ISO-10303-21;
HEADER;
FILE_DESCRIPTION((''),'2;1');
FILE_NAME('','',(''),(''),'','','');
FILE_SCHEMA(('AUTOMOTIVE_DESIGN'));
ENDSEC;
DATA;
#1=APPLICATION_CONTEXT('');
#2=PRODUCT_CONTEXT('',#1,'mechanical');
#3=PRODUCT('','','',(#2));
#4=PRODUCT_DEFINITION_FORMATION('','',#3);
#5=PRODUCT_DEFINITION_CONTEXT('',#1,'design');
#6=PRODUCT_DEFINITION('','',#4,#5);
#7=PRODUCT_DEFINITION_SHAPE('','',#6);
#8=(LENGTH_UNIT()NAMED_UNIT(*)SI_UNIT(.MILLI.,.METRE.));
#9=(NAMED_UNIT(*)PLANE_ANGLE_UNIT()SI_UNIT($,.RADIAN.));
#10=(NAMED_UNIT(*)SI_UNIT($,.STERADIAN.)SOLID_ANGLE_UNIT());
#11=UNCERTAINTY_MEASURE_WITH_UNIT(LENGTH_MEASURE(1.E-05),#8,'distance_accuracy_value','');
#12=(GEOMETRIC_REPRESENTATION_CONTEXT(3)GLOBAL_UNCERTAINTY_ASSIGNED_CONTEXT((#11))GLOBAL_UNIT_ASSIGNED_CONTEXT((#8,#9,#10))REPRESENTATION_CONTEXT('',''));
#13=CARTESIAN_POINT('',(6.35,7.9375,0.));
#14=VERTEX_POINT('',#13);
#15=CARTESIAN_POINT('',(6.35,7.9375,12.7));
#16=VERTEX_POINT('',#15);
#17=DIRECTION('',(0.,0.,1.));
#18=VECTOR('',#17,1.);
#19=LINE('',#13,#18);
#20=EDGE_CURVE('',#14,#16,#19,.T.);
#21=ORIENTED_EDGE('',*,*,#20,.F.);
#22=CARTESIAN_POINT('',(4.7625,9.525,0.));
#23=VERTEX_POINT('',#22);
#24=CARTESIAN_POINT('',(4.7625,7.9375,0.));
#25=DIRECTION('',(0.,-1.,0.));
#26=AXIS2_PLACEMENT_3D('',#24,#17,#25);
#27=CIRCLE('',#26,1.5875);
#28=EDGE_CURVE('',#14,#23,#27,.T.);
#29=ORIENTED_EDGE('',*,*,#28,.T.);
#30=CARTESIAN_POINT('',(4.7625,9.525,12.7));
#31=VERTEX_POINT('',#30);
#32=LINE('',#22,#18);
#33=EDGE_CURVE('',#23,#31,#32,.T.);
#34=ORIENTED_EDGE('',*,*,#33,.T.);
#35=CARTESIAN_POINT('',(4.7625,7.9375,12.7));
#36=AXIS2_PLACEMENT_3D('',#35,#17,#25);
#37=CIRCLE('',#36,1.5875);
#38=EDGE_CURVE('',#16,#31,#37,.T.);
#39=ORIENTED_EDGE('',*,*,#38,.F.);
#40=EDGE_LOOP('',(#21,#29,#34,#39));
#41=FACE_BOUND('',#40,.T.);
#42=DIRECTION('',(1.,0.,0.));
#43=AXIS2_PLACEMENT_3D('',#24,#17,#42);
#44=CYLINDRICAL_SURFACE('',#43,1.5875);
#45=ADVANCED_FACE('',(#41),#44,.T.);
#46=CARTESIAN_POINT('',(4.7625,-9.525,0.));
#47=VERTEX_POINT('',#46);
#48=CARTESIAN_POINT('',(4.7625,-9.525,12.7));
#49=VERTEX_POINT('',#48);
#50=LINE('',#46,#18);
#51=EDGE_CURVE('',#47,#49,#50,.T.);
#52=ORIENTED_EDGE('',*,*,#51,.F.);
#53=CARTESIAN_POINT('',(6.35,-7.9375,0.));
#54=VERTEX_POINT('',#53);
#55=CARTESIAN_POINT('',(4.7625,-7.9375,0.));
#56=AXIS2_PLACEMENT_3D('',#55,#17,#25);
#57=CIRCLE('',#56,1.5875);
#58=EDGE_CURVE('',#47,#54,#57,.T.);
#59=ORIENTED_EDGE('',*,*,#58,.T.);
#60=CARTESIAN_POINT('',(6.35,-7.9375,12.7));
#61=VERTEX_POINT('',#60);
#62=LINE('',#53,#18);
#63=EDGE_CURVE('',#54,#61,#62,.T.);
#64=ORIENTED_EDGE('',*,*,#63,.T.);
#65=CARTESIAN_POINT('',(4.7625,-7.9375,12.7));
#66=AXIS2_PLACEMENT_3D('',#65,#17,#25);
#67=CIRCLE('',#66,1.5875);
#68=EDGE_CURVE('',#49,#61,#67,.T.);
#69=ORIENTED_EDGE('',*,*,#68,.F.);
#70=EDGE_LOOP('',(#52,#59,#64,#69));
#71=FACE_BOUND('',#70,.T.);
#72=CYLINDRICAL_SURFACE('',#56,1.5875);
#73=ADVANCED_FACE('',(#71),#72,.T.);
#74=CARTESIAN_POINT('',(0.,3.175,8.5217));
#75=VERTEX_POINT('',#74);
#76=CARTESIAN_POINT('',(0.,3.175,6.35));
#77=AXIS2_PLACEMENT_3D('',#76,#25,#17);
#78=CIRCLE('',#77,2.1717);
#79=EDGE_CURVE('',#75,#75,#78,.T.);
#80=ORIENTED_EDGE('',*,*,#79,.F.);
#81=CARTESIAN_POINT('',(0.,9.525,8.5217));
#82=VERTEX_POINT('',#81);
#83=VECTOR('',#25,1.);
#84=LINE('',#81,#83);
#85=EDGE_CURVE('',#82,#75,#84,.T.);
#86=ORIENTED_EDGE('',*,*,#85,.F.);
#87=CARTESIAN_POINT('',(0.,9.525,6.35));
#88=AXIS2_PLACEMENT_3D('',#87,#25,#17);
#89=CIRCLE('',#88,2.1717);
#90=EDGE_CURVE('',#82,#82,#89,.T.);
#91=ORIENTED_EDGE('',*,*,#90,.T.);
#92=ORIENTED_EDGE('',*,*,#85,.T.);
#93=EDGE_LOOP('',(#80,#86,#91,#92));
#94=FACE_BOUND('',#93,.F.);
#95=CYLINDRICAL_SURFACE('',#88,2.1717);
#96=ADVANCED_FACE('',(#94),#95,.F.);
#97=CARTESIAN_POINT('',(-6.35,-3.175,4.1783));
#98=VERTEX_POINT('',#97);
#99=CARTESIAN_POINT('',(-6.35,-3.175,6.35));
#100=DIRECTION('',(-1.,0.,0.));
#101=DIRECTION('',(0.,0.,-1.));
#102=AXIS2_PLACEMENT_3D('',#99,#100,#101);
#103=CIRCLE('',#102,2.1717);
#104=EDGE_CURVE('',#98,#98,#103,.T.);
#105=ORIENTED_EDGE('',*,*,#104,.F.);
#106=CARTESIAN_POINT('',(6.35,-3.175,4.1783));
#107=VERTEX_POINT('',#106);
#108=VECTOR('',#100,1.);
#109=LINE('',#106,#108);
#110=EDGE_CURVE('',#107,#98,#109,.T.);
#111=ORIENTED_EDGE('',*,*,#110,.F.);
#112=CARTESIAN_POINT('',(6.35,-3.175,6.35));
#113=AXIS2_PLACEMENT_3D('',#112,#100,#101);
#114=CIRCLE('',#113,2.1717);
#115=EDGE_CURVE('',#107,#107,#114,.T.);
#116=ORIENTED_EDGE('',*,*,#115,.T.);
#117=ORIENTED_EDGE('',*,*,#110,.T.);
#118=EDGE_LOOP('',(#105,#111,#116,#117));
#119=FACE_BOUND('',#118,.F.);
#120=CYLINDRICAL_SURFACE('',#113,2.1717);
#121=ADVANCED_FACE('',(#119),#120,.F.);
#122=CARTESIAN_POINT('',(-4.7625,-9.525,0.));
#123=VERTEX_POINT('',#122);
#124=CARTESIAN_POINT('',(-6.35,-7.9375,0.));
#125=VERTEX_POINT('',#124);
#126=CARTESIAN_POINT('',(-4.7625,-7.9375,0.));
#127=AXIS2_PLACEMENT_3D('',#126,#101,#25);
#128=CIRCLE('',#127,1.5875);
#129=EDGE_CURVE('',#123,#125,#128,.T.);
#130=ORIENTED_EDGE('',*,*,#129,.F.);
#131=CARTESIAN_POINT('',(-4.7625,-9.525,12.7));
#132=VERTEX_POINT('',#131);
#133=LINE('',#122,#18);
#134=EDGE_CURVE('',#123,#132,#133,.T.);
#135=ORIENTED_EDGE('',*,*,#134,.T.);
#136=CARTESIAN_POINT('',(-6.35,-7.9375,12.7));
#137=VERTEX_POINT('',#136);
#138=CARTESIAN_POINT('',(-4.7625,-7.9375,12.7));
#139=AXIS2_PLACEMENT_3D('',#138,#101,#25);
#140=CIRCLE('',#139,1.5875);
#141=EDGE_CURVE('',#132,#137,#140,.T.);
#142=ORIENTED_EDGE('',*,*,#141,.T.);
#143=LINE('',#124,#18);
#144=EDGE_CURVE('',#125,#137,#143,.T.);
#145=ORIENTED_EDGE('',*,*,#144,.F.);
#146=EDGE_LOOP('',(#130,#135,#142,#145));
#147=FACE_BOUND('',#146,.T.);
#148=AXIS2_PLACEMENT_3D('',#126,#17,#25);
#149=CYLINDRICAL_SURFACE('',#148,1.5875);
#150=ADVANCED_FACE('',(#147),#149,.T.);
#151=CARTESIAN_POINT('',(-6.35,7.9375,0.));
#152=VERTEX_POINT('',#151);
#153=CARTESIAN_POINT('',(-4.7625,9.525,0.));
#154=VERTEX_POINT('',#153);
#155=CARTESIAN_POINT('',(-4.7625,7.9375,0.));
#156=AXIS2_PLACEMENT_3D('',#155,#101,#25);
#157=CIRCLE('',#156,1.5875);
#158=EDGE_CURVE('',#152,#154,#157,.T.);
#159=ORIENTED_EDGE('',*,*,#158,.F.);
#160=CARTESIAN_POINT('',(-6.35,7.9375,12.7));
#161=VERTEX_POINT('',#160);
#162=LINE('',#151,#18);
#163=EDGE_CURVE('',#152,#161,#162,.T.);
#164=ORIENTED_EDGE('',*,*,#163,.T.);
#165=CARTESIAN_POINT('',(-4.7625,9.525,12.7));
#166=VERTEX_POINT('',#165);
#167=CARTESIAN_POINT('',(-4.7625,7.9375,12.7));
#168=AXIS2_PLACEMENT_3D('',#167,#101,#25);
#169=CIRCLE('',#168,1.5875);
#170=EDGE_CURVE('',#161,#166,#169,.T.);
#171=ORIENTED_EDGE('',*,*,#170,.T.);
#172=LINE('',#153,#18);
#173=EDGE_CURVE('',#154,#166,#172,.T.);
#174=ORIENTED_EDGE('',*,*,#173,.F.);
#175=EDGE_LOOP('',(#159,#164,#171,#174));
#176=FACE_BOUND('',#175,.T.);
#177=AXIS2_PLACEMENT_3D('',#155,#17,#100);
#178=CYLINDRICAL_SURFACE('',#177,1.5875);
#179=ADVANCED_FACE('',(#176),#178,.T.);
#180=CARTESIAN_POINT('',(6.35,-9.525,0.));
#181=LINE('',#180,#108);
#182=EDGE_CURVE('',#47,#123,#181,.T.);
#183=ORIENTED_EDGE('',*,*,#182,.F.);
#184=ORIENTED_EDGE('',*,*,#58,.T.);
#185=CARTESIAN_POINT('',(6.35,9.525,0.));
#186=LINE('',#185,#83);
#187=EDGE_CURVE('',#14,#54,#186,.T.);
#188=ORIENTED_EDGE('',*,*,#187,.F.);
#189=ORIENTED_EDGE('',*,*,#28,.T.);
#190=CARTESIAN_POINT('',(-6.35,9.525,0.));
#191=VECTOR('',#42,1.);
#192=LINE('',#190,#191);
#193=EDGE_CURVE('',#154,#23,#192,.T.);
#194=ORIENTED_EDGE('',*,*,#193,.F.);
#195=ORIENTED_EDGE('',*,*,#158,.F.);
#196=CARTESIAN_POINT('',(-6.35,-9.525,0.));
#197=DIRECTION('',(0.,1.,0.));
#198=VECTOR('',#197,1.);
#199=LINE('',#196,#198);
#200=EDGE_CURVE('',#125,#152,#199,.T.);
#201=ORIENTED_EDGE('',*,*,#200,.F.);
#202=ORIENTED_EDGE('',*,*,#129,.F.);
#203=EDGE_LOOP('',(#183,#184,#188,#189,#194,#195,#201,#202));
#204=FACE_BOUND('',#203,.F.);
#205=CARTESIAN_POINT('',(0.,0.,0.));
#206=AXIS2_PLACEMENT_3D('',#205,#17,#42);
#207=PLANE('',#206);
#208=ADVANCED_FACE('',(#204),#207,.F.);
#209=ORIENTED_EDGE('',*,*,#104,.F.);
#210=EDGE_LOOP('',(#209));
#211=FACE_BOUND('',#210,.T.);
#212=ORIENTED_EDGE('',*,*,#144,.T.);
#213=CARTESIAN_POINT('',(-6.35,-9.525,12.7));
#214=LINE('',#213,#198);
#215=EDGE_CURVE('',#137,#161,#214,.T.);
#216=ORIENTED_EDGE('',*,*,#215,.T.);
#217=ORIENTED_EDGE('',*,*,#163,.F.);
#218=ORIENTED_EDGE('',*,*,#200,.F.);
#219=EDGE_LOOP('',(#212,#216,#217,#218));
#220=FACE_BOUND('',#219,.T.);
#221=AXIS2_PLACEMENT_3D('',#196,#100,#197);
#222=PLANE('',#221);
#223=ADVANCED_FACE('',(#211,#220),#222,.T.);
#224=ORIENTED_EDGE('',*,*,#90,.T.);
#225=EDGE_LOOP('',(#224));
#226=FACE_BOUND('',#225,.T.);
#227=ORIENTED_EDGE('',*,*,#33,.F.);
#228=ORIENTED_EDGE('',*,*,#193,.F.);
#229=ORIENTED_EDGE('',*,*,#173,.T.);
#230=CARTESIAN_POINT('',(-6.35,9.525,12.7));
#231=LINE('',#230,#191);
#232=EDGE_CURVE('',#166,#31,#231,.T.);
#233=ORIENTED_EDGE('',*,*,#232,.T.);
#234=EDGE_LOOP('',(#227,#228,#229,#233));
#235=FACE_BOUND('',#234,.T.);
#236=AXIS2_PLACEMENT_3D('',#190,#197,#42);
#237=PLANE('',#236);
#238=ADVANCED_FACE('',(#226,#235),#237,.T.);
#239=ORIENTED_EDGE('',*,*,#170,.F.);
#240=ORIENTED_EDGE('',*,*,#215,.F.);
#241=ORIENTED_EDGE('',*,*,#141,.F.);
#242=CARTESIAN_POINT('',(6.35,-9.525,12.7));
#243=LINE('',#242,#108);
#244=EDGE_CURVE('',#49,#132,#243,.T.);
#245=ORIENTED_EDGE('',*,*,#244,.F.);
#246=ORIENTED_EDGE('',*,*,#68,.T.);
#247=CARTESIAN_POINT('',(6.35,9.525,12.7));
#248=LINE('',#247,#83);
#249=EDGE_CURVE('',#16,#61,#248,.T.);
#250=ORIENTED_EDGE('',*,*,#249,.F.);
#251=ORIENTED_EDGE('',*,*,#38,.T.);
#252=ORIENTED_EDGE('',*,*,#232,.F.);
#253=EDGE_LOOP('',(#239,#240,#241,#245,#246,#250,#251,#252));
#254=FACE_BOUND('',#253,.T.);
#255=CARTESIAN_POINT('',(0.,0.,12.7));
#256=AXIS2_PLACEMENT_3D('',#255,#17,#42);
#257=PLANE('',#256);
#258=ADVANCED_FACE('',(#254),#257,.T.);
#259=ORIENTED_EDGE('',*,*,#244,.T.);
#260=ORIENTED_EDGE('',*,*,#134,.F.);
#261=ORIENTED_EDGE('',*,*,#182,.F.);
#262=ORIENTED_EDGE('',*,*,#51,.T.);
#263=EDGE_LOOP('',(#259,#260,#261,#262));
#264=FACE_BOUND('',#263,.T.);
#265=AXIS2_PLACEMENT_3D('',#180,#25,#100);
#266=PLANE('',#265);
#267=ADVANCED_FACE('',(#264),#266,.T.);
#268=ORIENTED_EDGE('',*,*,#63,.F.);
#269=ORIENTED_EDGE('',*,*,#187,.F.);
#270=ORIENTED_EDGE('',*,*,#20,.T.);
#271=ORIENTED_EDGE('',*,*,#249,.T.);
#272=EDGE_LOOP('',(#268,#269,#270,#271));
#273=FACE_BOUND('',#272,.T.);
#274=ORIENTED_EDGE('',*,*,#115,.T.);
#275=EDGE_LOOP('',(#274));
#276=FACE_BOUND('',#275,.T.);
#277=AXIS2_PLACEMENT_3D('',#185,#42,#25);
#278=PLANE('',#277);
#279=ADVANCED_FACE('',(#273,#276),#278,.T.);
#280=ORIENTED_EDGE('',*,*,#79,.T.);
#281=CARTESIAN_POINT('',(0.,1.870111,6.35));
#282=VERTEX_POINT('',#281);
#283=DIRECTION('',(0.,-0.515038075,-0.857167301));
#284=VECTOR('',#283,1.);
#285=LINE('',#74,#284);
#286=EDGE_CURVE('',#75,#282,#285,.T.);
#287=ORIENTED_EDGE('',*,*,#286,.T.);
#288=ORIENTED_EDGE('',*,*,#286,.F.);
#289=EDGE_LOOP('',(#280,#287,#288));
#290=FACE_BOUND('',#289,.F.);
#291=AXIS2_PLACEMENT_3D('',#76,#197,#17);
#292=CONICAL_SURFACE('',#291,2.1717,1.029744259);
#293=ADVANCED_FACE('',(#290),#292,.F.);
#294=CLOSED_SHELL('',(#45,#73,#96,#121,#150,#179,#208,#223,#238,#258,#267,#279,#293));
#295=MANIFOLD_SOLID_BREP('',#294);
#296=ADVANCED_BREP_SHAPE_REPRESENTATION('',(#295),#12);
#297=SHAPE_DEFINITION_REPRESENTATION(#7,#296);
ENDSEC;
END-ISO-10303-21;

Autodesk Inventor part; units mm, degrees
ref_plane "YZ Plane" through (0, 0, 0) normal (1, 0, 0) x (0, 1, 0)
ref_plane "XZ Plane" through (0, 0, 0) normal (0, 1, 0) x (-1, 0, 0)
ref_plane "XY Plane" through (0, 0, 0) normal (0, 0, 1) x (1, 0, 0)
sketch "Sketch1" plane through (0, 0, 0) normal (0, 0, 1) x (1, 0, 0)
  line L0 (6.35, -9.525) -> (-6.35, -9.525)
  line L1 (-6.35, -9.525) -> (-6.35, 9.525)
  line L2 (-6.35, 9.525) -> (6.35, 9.525)
  line L3 (6.35, 9.525) -> (6.35, -9.525)
  line L4 (6.35, -9.525) -> (-6.35, 9.525) construction
  line L5 (-6.35, -9.525) -> (6.35, 9.525) construction
  point P0 (0, 0)
  dimension "d0" = 12.7
  dimension "d1" = 19.05
extrude "Plate1" add sketch "Sketch1" along normal blind 12.7
sketch "Sketch2" plane through (-6.35, 9.525, 0) normal (0, 1, 0) x (1, 0, 0)
  line L0 (12.7, 0) -> (0, 0) projected
  point P0 (6.35, 0)
  point P1 (6.35, -6.35)
  point P2 (6.35, 0)
  dimension "d3" = 6.35
hole "Hole1" at (0, 9.525, 6.35) direction (0, -1, 0) diameter 4.3434 depth 6.35 tip angle 118 thread size "12-24 UNC" class "2B" standard "ANSI Unified Screw Threads"
sketch "Sketch3" plane through (6.35, -9.525, 0) normal (1, 0, 0) x (0, 0, -1)
  line L0 (0, 19.05) -> (-12.7, 19.05) projected
  point P0 (0, 9.525)
  point P1 (-6.35, 6.35)
  point P2 (-6.35, 19.05)
  dimension "d11" = 12.7
hole "Hole2" at (6.35, -3.175, 6.35) direction (-1, 0, 0) diameter 4.3434 depth 12.7 thread size "12-24 UNC" class "2B" standard "ANSI Unified Screw Threads"
fillet "Corner Round1" radius 1.5875 4 edges at (6.35, 9.525, 6.35) (-6.35, 9.525, 6.35) (-6.35, -9.525, 6.35) (6.35, -9.525, 6.35)
equation "\"d17\" = Thickness"
equation "\"d2\" = Thickness"
equation "\"BendRadius\" = Thickness"
equation "\"BendReliefWidth\" = Thickness"
equation "\"BendReliefDepth\" = 0.5 * Thickness"
equation "\"CornerReliefSize\" = 4 * Thickness"
equation "\"MinimumRemnant\" = 2 * Thickness"
equation "\"TransitionRadius\" = BendRadius"
equation "\"JacobiRadiusSize\" = BendRadius"
equation "\"GapSize\" = Thickness"
equation "\"Thickness\" = 12.7"
properties part number "PLATE,NUT-BLOCK,SINGLE-L" material "Aluminum 6061"
